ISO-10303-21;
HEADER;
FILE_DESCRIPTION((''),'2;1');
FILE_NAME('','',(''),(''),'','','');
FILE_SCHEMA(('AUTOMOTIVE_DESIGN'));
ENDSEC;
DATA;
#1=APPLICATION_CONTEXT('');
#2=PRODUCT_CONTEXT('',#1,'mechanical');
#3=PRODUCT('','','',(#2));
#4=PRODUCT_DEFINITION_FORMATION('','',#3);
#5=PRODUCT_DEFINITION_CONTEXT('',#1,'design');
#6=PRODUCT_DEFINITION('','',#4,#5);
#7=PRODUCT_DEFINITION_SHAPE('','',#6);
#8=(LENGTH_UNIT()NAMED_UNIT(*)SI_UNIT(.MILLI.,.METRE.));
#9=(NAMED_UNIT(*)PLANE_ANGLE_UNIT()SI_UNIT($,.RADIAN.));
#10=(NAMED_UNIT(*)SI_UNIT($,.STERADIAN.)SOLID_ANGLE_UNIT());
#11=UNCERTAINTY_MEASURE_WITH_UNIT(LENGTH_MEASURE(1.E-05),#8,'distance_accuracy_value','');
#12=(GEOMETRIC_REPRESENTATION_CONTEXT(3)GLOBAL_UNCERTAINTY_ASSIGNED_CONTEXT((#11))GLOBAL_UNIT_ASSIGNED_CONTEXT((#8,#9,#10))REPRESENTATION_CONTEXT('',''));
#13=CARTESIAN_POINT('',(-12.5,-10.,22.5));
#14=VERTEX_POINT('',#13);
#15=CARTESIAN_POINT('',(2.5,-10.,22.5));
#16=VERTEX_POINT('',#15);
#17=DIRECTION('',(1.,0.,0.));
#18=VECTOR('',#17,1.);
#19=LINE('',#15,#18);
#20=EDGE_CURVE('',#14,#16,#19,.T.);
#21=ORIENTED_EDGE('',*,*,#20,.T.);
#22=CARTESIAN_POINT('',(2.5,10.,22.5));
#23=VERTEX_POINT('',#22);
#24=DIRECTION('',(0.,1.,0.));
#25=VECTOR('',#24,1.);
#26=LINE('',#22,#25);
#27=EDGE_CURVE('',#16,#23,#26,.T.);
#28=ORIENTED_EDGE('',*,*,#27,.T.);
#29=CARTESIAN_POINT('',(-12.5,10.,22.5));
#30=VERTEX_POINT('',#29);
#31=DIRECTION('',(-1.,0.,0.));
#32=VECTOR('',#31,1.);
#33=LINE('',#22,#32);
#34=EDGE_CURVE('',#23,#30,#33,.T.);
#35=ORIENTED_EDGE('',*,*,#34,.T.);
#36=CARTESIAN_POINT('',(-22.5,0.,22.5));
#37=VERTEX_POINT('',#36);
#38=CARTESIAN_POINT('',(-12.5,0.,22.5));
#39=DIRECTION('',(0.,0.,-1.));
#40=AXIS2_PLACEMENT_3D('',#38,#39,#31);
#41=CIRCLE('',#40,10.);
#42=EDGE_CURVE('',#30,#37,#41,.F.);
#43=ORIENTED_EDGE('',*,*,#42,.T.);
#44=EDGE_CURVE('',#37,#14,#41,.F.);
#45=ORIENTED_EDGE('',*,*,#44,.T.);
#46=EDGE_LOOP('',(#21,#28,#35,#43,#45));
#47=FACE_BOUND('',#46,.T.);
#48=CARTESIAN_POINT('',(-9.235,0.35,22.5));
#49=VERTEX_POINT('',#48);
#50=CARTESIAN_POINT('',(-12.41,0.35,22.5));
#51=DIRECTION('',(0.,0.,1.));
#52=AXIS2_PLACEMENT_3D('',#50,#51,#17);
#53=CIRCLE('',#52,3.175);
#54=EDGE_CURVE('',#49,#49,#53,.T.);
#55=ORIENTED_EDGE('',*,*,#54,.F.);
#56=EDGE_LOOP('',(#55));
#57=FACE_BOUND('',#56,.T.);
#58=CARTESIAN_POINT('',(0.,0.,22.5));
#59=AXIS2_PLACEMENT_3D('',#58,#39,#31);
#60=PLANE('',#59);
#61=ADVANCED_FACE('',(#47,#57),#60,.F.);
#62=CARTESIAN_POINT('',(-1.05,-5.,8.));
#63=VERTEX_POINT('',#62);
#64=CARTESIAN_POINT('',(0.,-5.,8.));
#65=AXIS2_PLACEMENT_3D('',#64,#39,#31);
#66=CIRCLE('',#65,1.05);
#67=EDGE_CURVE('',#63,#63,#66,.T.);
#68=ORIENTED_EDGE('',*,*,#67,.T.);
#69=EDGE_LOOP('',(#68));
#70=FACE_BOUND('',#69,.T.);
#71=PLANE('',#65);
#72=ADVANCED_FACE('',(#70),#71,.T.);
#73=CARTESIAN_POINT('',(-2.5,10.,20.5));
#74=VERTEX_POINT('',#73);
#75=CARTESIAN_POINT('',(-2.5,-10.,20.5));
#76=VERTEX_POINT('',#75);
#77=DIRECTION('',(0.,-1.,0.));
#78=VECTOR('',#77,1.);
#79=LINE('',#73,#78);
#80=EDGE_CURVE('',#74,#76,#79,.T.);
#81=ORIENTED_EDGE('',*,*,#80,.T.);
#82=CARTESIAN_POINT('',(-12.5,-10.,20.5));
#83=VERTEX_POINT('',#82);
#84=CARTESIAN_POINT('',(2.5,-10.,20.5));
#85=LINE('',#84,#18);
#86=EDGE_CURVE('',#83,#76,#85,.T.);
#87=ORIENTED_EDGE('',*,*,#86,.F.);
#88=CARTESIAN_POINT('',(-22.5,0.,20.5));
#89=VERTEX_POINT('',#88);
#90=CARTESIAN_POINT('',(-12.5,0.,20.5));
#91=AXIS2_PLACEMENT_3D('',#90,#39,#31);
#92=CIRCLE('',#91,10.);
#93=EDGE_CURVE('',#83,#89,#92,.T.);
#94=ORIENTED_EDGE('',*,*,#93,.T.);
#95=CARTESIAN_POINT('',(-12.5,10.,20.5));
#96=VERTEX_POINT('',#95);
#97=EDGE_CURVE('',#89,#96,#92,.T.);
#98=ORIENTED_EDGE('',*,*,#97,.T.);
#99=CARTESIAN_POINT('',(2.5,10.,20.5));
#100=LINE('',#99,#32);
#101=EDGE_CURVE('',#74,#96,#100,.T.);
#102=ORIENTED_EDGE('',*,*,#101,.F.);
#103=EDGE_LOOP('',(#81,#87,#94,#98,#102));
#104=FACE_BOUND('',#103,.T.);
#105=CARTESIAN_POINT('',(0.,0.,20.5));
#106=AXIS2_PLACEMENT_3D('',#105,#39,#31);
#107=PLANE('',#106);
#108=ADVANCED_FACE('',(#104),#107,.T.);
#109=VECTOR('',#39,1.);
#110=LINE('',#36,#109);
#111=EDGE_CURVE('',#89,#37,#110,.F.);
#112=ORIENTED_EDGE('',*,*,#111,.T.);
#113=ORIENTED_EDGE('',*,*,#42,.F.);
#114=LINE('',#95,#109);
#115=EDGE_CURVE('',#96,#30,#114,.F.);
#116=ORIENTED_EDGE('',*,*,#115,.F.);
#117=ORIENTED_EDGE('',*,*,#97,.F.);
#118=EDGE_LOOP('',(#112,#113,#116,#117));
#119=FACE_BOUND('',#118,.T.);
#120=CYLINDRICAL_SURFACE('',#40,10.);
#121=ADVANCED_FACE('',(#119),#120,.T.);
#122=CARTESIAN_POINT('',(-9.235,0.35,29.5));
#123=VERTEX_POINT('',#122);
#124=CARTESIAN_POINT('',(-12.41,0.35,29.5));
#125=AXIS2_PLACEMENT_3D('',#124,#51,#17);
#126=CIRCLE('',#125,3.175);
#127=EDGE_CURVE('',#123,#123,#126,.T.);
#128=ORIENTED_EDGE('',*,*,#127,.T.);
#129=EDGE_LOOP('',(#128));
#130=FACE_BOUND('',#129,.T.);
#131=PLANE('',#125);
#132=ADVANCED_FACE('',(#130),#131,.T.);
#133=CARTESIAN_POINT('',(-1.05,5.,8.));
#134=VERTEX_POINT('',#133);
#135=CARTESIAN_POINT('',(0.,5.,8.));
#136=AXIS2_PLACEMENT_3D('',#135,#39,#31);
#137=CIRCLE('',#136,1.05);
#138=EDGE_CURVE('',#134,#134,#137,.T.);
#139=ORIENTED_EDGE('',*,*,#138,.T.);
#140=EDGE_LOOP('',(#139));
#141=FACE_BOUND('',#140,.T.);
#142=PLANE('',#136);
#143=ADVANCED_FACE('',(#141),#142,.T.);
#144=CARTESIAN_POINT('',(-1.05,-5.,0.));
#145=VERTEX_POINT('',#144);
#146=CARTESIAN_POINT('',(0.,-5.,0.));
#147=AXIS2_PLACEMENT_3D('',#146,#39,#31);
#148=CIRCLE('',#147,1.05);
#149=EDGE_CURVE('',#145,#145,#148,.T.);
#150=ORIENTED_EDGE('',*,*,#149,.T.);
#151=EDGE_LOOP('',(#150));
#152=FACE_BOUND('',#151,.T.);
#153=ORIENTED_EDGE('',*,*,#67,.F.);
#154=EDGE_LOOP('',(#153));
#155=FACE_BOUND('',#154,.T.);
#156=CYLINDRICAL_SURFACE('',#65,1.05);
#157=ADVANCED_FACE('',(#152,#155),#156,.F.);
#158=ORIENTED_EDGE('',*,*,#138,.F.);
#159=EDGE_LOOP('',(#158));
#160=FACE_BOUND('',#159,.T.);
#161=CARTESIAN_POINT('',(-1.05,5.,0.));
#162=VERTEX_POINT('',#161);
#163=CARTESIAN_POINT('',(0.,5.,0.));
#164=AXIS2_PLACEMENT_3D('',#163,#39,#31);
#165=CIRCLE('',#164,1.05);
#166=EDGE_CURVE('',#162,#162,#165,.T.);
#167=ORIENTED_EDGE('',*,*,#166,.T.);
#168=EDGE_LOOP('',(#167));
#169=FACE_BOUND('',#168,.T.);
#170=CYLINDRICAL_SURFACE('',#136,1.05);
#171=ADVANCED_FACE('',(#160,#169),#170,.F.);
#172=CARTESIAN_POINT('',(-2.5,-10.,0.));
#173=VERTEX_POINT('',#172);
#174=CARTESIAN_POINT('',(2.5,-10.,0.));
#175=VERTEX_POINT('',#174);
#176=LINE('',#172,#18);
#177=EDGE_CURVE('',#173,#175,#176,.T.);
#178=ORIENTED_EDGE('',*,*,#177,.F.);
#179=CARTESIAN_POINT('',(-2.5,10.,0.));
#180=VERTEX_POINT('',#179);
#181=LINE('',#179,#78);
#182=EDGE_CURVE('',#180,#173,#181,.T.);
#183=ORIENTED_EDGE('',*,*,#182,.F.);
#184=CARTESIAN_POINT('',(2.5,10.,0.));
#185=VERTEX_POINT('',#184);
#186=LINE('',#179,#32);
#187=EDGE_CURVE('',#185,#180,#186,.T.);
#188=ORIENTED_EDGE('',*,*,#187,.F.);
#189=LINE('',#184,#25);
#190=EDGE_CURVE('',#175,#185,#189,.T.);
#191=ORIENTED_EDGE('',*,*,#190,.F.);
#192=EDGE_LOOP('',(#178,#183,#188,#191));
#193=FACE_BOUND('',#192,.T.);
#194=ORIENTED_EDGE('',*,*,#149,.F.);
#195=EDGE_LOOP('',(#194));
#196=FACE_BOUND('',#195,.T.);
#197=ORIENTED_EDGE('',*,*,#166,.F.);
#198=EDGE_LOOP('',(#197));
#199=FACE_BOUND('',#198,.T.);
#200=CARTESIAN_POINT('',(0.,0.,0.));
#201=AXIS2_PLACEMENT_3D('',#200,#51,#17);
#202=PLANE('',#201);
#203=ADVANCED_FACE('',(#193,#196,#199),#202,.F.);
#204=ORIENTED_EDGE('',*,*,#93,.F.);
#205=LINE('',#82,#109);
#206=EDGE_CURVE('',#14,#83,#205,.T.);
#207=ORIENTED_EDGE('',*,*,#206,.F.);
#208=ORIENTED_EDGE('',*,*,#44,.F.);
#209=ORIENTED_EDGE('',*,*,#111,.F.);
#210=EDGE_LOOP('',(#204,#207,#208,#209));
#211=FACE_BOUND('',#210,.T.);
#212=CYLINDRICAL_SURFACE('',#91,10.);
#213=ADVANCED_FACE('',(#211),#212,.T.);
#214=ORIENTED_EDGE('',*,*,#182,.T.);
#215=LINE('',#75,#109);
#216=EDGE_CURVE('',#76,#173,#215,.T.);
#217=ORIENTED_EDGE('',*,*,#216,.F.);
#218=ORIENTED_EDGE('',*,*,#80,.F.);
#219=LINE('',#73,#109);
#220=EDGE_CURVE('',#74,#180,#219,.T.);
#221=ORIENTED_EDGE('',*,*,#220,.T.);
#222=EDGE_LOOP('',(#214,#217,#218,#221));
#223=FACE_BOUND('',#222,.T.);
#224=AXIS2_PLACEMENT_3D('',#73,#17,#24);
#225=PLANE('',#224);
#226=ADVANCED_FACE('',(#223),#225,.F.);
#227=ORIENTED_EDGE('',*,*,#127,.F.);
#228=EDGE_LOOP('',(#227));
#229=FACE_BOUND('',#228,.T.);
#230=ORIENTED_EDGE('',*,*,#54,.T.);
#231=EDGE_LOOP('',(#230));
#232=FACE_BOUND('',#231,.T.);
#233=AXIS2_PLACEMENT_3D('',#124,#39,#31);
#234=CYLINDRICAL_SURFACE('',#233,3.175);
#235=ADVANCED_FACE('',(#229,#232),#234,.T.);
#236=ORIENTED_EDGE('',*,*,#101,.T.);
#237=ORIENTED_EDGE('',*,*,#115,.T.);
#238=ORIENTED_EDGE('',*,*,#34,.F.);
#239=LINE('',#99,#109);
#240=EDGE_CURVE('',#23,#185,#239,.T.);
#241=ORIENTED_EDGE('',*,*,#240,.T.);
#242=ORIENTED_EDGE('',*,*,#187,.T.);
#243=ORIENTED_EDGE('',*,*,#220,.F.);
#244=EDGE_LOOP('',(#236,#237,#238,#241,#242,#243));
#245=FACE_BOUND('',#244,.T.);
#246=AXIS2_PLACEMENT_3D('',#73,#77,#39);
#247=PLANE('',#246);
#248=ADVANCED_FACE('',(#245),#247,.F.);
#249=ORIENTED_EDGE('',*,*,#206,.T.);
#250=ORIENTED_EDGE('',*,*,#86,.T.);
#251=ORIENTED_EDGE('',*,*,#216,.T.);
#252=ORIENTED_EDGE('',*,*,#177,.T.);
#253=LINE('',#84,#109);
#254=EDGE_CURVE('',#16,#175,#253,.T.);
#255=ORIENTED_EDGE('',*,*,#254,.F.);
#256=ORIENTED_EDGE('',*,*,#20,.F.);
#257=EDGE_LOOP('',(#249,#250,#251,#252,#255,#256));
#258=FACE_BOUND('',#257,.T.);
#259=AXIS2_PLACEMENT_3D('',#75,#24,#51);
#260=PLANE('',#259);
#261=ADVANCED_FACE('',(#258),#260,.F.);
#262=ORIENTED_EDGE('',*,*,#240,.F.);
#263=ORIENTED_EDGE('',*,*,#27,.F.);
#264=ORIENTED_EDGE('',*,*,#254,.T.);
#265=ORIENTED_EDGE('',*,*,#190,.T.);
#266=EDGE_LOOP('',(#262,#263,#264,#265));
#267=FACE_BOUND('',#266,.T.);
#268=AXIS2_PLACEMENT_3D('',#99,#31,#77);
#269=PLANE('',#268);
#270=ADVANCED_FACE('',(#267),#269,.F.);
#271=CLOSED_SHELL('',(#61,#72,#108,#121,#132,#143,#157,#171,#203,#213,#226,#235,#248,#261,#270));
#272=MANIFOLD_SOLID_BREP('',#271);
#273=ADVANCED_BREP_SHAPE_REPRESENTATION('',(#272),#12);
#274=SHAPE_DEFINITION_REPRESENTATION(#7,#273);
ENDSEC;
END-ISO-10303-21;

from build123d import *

# Parameters (mm, degrees)
ESQUISSE1_W             = 5
ESQUISSE1_H             = 20
BOSS_EXTRU_1_DEPTH      = 20.5
ESQUISSE2_W             = 25
ESQUISSE2_H             = 20
BOSS_EXTRU_2_DEPTH      = 2
ESQUISSE3_R             = 3.175
BOSS_EXTRU_3_DEPTH      = 7
CONG_1_R                = 10
ESQUISSE4_R             = 1.05
ENL_V_MAT_EXTRU_1_DEPTH = 8


with BuildPart() as part:
    # Esquisse1 → Boss.-Extru.1 (new body)
    with BuildSketch(Plane.XY):
        Rectangle(ESQUISSE1_W, ESQUISSE1_H)
    extrude(amount=BOSS_EXTRU_1_DEPTH)

    # Esquisse2 → Boss.-Extru.2 (add)
    with BuildSketch(Plane.XY.offset(20.5)):
        with Locations((-10, 0)):
            Rectangle(ESQUISSE2_W, ESQUISSE2_H)
    extrude(amount=BOSS_EXTRU_2_DEPTH)

    # Esquisse3 → Boss.-Extru.3 (add)
    with BuildSketch(Plane.XY.offset(22.5)):
        with Locations((-12.41, 0.35)):
            Circle(ESQUISSE3_R)
    extrude(amount=BOSS_EXTRU_3_DEPTH)

    # Congé1
    cong_1_edges = [part.edges().sort_by_distance(p)[0] for p in [
        (-22.5, 10, 21.5),
        (-22.5, -10, 21.5),
    ]]
    fillet(cong_1_edges, radius=CONG_1_R - 0.0001)  # a hair under: the kernel refuses the full size

    # Esquisse4 → Enlèv. mat.-Extru.1 (cut)
    with BuildSketch(Plane(origin=(0, 0, 0), x_dir=(-1, 0, 0), z_dir=(0, 0, -1))):
        with Locations((0, 5)):
            Circle(ESQUISSE4_R)
        with Locations((0, -5)):
            Circle(ESQUISSE4_R)
    extrude(amount=-ENL_V_MAT_EXTRU_1_DEPTH, mode=Mode.SUBTRACT)


solid = part.part
